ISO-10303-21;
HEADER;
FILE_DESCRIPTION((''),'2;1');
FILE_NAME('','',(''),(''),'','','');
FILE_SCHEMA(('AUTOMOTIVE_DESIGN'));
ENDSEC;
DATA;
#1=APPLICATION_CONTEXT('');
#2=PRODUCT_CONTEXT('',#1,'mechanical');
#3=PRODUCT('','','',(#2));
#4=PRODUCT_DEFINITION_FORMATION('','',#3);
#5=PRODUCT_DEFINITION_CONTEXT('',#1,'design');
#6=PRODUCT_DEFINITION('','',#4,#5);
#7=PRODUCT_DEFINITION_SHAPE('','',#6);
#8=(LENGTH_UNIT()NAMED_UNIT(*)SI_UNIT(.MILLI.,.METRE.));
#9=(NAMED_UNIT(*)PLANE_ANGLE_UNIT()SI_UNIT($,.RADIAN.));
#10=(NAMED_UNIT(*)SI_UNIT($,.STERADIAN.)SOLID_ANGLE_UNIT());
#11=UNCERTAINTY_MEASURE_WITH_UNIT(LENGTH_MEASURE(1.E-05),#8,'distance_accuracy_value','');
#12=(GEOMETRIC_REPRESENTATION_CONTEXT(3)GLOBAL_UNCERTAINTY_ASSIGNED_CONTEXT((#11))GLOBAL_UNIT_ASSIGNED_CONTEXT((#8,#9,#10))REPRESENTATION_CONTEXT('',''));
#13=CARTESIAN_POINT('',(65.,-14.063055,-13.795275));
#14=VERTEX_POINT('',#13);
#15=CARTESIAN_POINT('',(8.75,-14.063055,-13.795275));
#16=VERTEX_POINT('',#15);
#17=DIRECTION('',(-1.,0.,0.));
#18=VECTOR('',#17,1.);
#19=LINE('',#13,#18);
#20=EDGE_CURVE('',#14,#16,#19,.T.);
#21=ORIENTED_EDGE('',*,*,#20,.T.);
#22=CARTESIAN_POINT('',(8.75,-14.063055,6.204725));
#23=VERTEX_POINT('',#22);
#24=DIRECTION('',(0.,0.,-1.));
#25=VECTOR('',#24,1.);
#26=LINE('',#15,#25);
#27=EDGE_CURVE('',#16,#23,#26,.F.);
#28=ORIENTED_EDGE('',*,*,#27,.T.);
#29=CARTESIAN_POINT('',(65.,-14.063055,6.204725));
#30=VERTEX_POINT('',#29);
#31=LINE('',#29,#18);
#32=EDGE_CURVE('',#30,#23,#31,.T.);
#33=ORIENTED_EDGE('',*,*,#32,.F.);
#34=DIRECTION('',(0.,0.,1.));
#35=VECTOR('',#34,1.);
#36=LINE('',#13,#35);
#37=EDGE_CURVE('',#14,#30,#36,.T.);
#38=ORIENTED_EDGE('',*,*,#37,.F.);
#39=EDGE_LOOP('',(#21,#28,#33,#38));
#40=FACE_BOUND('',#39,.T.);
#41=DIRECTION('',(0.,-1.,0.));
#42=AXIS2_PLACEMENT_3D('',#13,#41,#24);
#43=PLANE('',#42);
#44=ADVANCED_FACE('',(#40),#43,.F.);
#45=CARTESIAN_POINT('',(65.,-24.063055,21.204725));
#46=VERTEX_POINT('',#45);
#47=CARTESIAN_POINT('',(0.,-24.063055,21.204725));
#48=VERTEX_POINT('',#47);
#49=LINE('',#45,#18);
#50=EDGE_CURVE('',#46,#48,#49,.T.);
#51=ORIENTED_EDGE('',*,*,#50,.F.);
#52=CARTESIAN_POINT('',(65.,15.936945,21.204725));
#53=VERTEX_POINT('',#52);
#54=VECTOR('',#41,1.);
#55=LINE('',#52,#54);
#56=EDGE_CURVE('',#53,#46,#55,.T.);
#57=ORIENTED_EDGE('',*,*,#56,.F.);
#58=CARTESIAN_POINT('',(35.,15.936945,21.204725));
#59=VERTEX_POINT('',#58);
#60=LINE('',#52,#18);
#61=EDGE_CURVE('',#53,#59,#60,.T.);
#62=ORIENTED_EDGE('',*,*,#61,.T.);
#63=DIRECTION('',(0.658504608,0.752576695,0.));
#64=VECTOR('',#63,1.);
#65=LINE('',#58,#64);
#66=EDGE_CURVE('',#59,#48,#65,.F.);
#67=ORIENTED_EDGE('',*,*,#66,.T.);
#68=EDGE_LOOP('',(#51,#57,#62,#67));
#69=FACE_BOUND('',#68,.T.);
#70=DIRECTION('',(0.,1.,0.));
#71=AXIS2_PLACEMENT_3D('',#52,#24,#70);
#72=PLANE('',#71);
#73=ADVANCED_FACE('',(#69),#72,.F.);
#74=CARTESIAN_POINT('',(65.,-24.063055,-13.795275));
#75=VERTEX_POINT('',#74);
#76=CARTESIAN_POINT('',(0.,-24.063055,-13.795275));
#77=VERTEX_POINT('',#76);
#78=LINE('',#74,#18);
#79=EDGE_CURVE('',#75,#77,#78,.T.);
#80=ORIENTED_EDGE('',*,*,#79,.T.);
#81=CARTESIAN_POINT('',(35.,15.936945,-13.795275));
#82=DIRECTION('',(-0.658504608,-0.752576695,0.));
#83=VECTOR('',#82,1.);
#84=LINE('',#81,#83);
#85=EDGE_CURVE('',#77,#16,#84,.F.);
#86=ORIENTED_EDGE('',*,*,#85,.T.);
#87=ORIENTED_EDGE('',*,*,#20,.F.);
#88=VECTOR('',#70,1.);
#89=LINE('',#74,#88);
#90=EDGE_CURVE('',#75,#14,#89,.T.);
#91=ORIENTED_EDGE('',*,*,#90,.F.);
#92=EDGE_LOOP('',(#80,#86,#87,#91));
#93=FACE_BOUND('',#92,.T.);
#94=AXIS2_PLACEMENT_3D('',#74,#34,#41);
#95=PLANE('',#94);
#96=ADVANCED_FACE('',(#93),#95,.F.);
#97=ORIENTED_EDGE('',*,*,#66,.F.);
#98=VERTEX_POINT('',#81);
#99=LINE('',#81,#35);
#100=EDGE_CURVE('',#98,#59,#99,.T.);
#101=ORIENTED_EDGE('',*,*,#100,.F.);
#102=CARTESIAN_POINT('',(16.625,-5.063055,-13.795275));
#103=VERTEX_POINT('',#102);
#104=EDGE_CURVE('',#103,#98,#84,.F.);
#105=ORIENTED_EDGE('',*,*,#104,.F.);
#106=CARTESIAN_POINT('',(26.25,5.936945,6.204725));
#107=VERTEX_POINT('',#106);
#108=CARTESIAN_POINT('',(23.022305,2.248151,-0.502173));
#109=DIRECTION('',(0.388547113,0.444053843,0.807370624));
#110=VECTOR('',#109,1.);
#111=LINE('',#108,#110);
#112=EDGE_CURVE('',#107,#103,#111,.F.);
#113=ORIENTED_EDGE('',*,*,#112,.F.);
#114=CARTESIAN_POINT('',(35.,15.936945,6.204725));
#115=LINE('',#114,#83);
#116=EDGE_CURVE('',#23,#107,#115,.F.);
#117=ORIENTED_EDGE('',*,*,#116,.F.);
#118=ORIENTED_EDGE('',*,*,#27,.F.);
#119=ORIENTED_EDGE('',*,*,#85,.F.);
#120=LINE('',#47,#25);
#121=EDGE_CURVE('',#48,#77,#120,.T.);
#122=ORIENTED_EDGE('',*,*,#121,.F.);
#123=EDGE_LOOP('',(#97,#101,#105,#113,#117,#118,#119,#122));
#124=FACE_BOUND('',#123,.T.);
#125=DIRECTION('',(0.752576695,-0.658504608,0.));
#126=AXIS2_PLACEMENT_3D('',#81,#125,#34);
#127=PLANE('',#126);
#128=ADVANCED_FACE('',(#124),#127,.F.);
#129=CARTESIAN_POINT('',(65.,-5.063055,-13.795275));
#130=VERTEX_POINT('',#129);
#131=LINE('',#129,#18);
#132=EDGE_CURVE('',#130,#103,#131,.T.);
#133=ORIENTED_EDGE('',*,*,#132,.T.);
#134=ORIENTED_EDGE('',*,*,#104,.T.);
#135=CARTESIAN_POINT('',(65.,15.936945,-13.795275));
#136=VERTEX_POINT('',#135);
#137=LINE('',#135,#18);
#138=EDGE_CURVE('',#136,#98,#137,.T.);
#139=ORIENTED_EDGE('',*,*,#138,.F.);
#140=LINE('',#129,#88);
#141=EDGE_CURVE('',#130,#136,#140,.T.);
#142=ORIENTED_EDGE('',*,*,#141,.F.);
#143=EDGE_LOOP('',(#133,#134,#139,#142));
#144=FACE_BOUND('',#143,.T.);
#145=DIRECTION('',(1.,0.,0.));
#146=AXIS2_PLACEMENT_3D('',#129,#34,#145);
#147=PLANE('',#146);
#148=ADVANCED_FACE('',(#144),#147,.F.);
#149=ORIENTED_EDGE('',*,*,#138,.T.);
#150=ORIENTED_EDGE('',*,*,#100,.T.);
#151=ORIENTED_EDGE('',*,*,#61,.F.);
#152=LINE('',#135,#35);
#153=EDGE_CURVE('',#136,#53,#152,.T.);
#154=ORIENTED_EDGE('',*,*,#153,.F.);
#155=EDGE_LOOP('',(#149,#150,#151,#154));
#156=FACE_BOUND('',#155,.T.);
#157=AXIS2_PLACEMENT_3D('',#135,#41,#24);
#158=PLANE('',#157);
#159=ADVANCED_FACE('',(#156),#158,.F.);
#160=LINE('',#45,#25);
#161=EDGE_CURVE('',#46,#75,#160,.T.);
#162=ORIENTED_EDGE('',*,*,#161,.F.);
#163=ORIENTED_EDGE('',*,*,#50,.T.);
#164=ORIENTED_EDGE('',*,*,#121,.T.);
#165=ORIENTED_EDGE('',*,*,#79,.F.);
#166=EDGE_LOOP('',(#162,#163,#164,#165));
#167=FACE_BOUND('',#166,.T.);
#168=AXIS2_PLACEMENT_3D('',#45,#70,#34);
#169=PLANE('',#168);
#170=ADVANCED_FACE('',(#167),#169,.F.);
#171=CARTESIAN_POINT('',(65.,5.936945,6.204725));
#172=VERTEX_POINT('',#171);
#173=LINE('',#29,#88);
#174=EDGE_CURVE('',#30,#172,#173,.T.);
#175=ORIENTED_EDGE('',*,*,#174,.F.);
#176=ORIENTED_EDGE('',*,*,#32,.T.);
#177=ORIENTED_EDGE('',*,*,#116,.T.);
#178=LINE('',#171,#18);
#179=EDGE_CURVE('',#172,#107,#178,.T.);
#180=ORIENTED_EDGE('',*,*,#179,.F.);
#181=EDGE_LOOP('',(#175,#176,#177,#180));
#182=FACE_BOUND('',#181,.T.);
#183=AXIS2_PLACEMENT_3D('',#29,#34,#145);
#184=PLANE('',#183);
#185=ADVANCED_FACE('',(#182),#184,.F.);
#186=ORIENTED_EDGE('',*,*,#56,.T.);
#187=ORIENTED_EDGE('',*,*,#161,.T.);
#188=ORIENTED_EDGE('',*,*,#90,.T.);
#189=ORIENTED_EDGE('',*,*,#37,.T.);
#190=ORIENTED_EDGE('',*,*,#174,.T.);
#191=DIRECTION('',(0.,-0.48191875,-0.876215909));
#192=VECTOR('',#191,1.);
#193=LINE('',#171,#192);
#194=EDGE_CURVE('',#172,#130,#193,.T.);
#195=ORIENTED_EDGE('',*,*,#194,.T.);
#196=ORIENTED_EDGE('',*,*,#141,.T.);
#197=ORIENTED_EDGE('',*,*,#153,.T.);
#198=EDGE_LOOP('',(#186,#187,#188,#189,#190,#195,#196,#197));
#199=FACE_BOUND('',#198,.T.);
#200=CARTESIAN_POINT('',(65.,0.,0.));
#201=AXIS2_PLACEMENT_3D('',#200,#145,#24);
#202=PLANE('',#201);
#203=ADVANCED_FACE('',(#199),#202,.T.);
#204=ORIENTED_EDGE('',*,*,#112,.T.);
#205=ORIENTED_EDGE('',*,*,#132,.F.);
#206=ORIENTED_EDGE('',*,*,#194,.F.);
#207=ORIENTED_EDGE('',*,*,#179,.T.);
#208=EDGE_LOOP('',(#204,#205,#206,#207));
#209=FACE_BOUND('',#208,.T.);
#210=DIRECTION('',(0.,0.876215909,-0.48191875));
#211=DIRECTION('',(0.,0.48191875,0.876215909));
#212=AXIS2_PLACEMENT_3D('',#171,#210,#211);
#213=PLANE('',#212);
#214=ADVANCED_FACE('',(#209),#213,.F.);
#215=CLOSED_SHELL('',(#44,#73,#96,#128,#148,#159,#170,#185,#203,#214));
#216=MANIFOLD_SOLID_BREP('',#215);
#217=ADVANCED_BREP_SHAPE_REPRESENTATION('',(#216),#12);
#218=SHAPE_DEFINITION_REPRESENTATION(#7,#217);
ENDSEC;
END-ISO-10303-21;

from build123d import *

# Parameters (mm, degrees)
BOSS_EXTRU_1_DEPTH = 65
CHANFREIN1_SIZE2   = 40
CHANFREIN1_SIZE    = 35


with BuildPart() as part:
    # Esquisse1 → Boss.-Extru.1 (new body)
    with BuildSketch(Plane(origin=(0, 0, 0), x_dir=(0, 0, -1), z_dir=(1, 0, 0))):
        Polygon((-21.204724929, -24.063055062), (13.795275071, -24.063055062), (13.795275071, -14.063055062), (-6.204724929, -14.063055062), (-6.204724929, 5.936944938), (13.795275071, -5.063055062), (13.795275071, 15.936944938), (-21.204724929, 15.936944938), align=None)
    extrude(amount=BOSS_EXTRU_1_DEPTH)

    # Chanfrein1
    chanfrein1_edges = [part.edges().sort_by_distance(p)[0] for p in [
        (0, 15.936944938, 3.704724929),
    ]]
    chanfrein1_side = [part.faces().sort_by_distance(p)[0] for p in [
        (0.7, 15.936944938, 3.704724929),
    ]]
    chamfer(chanfrein1_edges, length=CHANFREIN1_SIZE - 0.0001, length2=CHANFREIN1_SIZE2 - 0.0001, reference=chanfrein1_side[0])  # a hair under: the kernel refuses the full size


solid = part.part
